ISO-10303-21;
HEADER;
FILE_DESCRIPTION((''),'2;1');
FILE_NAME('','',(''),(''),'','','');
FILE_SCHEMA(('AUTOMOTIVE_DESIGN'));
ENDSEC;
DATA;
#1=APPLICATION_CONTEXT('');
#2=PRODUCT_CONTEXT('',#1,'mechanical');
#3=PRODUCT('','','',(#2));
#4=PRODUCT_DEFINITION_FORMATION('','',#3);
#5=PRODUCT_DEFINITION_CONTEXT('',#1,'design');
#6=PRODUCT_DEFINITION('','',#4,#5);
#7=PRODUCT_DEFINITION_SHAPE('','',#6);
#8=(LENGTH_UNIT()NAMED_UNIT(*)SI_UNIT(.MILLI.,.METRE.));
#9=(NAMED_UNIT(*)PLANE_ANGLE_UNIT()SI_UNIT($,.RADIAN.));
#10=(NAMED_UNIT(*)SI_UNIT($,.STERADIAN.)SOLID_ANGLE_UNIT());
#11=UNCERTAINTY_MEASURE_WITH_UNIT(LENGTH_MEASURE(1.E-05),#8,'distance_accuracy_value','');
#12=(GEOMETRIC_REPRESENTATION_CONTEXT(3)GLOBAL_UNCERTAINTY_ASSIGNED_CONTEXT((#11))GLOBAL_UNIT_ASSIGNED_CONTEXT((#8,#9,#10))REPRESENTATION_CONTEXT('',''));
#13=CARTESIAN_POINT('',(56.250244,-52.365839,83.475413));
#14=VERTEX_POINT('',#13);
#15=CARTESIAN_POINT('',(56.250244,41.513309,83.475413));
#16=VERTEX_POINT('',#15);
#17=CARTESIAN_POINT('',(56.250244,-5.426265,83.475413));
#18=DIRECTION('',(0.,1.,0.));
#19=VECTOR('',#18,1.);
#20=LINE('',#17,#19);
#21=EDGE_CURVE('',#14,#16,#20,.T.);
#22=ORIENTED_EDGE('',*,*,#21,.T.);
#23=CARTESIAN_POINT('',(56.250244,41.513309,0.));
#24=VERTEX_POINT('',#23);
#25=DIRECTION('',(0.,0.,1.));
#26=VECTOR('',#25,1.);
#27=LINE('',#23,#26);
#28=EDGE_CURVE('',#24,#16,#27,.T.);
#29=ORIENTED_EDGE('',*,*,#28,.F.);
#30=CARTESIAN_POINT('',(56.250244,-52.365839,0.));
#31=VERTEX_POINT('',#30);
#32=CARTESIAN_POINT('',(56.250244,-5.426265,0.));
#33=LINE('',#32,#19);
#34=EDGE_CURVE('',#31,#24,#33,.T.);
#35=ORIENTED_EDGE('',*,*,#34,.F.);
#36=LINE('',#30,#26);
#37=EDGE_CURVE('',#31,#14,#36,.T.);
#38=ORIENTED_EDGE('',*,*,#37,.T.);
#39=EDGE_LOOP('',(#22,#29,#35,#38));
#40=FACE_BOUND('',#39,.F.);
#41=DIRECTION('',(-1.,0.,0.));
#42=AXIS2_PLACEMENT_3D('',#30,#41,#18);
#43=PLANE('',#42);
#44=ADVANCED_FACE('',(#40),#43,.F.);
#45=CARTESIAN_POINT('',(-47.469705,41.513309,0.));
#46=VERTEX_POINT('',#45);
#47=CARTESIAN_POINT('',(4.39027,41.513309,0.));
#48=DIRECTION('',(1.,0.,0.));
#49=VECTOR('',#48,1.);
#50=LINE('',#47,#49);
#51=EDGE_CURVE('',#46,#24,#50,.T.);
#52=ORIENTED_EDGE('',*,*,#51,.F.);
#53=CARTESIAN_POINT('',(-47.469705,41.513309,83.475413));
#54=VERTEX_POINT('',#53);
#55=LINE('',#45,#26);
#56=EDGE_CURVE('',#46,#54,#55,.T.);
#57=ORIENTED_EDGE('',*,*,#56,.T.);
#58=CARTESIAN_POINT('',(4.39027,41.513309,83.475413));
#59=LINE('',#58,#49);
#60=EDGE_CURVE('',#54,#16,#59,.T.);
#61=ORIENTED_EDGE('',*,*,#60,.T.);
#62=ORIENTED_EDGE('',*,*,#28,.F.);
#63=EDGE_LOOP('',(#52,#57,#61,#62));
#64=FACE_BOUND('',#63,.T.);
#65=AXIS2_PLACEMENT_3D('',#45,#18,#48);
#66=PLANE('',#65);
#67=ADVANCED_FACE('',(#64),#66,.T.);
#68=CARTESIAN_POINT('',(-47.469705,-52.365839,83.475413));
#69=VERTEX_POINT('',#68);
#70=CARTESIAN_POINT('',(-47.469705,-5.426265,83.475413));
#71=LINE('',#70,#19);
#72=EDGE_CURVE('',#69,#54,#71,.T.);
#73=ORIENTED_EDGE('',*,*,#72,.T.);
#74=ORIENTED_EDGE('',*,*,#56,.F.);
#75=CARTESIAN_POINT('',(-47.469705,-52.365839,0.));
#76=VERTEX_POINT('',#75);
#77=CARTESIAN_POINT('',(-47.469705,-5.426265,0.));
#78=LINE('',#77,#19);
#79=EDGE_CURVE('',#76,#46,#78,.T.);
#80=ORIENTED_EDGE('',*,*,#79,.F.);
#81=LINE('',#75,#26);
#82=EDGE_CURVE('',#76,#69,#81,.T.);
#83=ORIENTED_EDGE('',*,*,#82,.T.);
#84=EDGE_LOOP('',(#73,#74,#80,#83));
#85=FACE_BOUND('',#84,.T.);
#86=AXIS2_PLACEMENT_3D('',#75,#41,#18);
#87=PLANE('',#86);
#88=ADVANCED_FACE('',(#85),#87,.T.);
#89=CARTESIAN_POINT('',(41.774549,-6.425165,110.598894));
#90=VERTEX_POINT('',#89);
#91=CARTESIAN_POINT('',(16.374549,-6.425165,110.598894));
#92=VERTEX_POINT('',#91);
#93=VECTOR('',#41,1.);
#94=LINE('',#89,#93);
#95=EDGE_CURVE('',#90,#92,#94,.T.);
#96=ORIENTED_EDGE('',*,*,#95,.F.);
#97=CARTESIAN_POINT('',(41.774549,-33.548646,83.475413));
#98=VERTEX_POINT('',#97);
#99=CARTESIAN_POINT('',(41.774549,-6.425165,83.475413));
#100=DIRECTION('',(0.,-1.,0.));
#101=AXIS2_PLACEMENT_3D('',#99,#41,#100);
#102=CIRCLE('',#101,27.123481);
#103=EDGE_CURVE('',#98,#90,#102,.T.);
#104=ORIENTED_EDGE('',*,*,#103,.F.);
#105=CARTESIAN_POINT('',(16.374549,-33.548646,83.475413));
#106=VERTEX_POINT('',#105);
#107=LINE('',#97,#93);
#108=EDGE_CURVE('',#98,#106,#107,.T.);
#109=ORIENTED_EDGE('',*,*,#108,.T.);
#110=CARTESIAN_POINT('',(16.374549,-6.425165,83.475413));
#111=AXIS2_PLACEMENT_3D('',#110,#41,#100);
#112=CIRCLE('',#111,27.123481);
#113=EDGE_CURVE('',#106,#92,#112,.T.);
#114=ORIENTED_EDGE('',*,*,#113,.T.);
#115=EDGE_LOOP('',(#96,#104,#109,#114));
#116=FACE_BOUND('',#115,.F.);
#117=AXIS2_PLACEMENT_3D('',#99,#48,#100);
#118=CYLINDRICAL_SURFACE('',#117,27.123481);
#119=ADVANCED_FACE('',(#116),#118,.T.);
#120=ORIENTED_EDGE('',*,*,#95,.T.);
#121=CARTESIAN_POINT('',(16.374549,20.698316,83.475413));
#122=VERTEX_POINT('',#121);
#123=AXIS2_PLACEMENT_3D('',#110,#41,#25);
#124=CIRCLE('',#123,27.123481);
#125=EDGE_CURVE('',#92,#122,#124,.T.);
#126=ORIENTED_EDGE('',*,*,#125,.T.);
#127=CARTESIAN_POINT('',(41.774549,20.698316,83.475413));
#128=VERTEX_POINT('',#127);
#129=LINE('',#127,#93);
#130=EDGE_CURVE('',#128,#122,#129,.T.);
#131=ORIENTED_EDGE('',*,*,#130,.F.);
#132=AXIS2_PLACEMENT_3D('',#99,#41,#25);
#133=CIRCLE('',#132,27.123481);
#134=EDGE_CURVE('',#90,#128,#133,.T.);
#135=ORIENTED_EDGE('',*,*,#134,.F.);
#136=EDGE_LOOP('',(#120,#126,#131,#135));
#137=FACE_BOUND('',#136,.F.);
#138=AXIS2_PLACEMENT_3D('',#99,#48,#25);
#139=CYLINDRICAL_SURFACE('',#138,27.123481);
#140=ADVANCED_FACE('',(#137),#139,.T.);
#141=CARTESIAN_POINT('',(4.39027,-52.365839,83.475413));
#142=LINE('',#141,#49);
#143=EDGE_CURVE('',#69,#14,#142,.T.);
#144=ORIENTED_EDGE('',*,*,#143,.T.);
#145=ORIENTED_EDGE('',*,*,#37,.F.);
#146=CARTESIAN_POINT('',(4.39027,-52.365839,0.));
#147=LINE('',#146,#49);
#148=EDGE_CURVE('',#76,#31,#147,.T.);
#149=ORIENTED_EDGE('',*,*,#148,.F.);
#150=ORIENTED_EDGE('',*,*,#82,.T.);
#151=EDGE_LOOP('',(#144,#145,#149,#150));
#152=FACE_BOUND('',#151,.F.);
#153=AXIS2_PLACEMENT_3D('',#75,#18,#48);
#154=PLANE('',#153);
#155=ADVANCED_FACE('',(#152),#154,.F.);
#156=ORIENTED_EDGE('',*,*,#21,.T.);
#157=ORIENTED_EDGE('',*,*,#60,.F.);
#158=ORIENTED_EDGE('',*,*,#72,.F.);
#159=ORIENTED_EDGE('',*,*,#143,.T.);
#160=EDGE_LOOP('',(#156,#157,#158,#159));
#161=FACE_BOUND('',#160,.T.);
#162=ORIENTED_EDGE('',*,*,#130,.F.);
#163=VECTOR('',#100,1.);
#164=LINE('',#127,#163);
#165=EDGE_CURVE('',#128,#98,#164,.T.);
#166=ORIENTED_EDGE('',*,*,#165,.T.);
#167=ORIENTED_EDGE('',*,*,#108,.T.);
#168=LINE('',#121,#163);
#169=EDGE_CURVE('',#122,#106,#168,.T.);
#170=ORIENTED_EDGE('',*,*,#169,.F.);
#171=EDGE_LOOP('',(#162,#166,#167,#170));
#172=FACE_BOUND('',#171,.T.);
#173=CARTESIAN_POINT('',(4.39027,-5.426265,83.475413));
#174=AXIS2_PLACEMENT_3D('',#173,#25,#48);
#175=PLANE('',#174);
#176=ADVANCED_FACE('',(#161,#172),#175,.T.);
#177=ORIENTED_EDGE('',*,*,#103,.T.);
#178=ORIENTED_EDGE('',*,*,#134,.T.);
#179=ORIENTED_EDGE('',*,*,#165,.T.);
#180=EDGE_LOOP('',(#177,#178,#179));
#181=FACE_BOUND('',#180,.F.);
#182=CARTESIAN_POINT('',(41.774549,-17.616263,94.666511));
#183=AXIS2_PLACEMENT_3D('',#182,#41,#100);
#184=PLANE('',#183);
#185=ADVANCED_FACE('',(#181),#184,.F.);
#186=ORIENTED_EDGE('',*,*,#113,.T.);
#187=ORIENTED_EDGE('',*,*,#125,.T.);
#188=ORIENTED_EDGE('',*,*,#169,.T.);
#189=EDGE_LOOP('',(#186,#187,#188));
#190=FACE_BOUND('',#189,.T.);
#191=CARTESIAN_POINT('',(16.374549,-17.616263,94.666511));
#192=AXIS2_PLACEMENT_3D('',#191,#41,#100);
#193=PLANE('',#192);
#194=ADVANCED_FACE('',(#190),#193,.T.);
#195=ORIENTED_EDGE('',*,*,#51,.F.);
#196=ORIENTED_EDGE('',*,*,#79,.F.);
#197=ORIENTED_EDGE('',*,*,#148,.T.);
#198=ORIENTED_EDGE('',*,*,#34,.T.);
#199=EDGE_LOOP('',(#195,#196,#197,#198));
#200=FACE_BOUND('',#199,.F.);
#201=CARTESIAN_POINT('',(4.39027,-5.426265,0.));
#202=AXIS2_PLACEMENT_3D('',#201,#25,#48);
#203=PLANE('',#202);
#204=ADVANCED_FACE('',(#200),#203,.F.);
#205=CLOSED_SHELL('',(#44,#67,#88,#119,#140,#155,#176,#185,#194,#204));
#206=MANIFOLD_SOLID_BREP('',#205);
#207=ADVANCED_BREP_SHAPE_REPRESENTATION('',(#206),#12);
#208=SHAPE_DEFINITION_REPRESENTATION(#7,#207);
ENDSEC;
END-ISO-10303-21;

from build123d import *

# Parameters (mm, degrees)
F0_W     = 103.7199497223
F0_H     = 93.8791483641
F1_DEPTH = 83.4754128009
F5_DEPTH = 25.4


with BuildPart() as f1:
    # F0 (on Top) → F1 (new body)
    with BuildSketch(Plane.XY):
        with Locations((4.3902695179, -5.4262652993)):
            Rectangle(F0_W, F0_H)
    extrude(amount=F1_DEPTH)

    # F4 (on face) → F5 (join)
    with BuildSketch(Plane(origin=(41.7745485902, 0, 0), x_dir=(0, -1, 0), z_dir=(-1, 0, 0))):
        with BuildLine():
            ThreePointArc((33.5486456752, 83.4754128009), (25.6043620093, 102.6546101703), (6.4251646399, 110.5988938361))
            Line((6.4251646399, 110.5988938361), (6.4251646399, 83.4754128009))
            Line((6.4251646399, 83.4754128009), (33.5486456752, 83.4754128009))
        make_face()
        with BuildLine():
            Line((6.4251646399, 83.4754128009), (6.4251646399, 110.5988938361))
            ThreePointArc((6.4251646399, 110.5988938361), (-12.7540327294, 102.6546101703), (-20.6983163953, 83.4754128009))
            Line((-20.6983163953, 83.4754128009), (6.4251646399, 83.4754128009))
        make_face()
    extrude(amount=F5_DEPTH)


solid = f1.part
